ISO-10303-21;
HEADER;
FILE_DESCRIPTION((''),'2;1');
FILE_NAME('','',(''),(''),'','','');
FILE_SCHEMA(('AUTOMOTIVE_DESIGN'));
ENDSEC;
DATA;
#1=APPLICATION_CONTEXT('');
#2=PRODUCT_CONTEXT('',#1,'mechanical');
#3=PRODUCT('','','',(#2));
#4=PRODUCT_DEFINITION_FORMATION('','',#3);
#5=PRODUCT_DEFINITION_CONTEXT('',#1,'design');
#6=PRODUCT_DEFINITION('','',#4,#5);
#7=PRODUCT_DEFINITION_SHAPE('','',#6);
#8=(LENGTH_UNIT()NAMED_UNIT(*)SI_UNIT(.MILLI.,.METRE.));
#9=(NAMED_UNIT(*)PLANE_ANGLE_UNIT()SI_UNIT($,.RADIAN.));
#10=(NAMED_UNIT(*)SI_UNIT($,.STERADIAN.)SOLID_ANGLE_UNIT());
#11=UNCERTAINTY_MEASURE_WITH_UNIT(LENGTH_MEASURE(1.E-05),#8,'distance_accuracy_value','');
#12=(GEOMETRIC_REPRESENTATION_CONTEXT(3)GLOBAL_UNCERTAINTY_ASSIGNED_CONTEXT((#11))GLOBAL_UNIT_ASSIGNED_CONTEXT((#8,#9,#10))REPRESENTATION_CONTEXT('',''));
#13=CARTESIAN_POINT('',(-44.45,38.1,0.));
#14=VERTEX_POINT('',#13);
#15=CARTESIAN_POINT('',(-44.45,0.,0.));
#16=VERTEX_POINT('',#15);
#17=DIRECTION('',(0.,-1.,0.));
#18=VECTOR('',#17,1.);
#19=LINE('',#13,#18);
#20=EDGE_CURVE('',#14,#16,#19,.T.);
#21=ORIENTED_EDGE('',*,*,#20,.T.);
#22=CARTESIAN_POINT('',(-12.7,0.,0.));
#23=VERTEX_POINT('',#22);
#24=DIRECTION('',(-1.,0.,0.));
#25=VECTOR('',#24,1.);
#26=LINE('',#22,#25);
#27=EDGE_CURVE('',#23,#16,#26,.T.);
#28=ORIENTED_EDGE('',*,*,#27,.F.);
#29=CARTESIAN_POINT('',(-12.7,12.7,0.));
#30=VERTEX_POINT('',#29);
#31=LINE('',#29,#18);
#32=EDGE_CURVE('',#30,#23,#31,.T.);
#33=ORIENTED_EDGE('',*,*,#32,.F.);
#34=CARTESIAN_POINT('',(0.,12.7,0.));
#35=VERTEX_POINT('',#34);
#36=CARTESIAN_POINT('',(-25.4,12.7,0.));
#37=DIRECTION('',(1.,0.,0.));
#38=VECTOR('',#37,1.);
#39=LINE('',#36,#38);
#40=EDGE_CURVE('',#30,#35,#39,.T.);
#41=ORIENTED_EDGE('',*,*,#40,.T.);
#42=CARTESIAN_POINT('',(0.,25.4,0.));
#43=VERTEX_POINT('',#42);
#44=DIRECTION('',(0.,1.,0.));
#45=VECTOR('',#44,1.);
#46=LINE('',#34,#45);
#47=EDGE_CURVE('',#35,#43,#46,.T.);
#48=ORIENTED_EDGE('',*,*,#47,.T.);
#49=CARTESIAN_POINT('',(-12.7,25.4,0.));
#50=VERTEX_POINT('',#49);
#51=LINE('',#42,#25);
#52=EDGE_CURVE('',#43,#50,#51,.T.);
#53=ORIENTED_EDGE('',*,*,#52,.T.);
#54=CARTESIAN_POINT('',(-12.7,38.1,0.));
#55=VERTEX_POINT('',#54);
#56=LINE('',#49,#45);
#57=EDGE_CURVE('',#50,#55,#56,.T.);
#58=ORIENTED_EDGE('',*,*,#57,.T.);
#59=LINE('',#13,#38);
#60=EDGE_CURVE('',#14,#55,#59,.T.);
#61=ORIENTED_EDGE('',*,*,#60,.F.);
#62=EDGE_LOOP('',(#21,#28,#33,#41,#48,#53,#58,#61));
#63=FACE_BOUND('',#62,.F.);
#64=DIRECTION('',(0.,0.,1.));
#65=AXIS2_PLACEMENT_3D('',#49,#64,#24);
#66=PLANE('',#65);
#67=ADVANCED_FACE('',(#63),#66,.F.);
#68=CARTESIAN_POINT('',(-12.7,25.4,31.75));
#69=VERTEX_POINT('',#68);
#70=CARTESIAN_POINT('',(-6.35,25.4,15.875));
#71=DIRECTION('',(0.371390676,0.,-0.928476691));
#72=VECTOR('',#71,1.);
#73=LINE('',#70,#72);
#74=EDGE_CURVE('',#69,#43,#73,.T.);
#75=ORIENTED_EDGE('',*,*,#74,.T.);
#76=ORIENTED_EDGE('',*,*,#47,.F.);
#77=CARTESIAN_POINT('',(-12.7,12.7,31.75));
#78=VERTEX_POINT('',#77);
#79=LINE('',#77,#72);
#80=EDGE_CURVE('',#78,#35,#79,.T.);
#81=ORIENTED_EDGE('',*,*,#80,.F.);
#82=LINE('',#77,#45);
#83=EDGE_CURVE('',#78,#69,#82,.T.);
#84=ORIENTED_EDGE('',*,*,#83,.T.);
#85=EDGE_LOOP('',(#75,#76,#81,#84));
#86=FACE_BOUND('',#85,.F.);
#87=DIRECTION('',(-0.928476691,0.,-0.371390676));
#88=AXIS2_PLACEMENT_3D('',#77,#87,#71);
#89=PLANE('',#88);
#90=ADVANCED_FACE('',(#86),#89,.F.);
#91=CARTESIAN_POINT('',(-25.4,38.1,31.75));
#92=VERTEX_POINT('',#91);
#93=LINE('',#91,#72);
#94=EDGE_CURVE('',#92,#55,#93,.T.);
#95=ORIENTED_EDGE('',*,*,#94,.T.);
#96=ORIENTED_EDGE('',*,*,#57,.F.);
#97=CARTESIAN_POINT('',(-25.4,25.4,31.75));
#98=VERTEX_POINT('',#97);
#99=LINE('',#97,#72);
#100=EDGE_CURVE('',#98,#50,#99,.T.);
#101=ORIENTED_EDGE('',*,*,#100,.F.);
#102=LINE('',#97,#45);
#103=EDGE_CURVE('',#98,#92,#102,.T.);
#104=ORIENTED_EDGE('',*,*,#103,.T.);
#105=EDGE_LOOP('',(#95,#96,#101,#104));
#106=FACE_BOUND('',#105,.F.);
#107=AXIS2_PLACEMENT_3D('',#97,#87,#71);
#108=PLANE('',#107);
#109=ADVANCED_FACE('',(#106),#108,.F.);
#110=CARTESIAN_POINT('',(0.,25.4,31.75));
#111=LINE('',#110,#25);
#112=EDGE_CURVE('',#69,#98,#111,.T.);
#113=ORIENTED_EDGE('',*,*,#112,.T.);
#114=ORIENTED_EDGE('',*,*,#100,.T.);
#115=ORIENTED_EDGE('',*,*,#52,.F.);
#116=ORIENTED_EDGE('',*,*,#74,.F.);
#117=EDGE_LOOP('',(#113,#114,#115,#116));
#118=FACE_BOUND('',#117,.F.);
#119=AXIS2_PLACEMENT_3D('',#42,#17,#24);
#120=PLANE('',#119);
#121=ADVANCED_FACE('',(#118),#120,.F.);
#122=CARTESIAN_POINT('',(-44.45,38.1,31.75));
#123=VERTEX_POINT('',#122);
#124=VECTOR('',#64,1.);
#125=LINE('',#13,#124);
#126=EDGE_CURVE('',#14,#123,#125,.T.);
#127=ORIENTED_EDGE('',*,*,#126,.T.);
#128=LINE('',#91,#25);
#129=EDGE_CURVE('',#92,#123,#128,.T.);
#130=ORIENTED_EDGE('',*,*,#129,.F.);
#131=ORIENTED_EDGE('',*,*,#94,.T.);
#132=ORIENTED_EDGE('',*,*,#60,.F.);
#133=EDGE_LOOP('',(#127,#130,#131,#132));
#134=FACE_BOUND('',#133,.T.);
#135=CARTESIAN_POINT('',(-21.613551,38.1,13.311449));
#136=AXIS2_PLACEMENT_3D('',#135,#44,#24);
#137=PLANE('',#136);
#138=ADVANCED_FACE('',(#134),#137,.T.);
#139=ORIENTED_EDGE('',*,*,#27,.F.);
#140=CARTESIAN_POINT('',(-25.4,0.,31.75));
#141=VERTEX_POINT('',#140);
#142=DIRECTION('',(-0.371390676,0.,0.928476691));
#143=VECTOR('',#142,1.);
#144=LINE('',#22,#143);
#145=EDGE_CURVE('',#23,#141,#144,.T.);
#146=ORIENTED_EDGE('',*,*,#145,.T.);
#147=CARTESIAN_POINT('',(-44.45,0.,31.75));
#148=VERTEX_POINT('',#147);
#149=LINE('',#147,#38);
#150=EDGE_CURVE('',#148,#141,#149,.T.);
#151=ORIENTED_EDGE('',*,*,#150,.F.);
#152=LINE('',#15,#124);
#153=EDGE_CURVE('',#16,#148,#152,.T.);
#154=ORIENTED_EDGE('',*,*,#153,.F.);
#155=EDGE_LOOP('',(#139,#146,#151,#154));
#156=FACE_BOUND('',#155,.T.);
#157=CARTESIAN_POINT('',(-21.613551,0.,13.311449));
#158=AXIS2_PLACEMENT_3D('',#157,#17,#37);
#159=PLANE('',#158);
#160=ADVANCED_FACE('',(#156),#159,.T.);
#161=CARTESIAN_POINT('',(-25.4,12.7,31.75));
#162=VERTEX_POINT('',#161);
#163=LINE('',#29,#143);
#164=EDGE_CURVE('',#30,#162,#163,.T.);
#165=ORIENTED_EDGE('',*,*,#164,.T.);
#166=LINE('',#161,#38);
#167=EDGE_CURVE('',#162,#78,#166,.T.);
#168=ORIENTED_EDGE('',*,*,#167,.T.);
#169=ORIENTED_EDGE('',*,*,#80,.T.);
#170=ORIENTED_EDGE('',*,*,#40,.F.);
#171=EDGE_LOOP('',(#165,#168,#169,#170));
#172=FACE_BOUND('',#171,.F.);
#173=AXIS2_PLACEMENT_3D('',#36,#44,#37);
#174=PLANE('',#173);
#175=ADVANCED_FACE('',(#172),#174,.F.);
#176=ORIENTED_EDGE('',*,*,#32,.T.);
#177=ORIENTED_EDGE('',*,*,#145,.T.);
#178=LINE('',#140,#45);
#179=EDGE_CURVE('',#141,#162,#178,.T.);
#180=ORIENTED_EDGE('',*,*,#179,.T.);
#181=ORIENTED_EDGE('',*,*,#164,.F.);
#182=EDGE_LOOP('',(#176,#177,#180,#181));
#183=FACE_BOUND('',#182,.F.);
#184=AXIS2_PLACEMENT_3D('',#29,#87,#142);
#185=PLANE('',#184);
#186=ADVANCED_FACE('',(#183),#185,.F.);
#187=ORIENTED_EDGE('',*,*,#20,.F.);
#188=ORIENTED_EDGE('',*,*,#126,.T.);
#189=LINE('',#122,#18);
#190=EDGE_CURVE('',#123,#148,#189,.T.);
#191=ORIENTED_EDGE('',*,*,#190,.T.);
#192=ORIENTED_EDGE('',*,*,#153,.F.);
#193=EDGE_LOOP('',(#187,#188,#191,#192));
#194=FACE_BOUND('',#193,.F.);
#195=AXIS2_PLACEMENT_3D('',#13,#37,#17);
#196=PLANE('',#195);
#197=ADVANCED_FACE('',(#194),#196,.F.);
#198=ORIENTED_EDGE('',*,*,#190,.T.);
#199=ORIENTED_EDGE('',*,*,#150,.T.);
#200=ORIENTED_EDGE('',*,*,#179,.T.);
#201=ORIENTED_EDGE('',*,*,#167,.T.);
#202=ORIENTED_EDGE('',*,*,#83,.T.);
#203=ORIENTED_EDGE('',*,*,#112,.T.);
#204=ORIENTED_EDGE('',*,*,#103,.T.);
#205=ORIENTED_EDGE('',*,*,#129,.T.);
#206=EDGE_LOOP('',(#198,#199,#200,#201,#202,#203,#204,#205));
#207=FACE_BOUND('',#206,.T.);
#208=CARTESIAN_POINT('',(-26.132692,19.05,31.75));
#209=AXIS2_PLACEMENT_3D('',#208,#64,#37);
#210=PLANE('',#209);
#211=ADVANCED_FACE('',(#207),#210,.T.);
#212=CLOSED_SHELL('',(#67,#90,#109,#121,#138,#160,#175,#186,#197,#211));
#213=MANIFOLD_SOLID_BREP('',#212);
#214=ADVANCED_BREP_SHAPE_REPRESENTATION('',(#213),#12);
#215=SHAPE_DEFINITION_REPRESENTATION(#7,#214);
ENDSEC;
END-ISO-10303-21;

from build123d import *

# Parameters (mm, degrees)
F1_DEPTH = 31.75
F3_DEPTH = 25.401
F5_DEPTH = 12.7
F7_DEPTH = 12.7


# Not quite as in the source:
# - a length typed as a fraction of an inch, garbled in the dataset ("3 / 203.2 mm" for 3/8 in), is restored


with BuildPart() as f1:
    # F0 (on Top) → F1 (new body)
    with BuildSketch(Plane.XY):
        Polygon((-25.4, 38.1), (-44.45, 38.1), (-44.45, 0), (-25.4, 0), (-25.4, 12.7), (0, 12.7), (0, 25.4), (-25.4, 25.4), align=None)
    extrude(amount=F1_DEPTH)

    # F2 (on face) → F3 (cut, through all)
    with BuildSketch(Plane.XZ.offset(-12.7)):
        Polygon((0, 31.75), (-12.7, 31.75), (0, 0), align=None)
    extrude(amount=-F3_DEPTH, mode=Mode.SUBTRACT)

    # F4 (on face) → F5 (join)
    with BuildSketch(Plane.XZ.offset(-12.7)):
        Polygon((-12.7, 0), (-25.4, 31.75), (-25.4, 0), align=None)
    extrude(amount=F5_DEPTH)

    # F6 (on face) → F7 (join)
    with BuildSketch(Plane(origin=(0, 25.4, 0), x_dir=(-1, 0, 0), z_dir=(0, 1, 0))):
        Polygon((25.4, 0), (25.4, 31.75), (12.7, 0), align=None)
    extrude(amount=F7_DEPTH)


solid = f1.part
